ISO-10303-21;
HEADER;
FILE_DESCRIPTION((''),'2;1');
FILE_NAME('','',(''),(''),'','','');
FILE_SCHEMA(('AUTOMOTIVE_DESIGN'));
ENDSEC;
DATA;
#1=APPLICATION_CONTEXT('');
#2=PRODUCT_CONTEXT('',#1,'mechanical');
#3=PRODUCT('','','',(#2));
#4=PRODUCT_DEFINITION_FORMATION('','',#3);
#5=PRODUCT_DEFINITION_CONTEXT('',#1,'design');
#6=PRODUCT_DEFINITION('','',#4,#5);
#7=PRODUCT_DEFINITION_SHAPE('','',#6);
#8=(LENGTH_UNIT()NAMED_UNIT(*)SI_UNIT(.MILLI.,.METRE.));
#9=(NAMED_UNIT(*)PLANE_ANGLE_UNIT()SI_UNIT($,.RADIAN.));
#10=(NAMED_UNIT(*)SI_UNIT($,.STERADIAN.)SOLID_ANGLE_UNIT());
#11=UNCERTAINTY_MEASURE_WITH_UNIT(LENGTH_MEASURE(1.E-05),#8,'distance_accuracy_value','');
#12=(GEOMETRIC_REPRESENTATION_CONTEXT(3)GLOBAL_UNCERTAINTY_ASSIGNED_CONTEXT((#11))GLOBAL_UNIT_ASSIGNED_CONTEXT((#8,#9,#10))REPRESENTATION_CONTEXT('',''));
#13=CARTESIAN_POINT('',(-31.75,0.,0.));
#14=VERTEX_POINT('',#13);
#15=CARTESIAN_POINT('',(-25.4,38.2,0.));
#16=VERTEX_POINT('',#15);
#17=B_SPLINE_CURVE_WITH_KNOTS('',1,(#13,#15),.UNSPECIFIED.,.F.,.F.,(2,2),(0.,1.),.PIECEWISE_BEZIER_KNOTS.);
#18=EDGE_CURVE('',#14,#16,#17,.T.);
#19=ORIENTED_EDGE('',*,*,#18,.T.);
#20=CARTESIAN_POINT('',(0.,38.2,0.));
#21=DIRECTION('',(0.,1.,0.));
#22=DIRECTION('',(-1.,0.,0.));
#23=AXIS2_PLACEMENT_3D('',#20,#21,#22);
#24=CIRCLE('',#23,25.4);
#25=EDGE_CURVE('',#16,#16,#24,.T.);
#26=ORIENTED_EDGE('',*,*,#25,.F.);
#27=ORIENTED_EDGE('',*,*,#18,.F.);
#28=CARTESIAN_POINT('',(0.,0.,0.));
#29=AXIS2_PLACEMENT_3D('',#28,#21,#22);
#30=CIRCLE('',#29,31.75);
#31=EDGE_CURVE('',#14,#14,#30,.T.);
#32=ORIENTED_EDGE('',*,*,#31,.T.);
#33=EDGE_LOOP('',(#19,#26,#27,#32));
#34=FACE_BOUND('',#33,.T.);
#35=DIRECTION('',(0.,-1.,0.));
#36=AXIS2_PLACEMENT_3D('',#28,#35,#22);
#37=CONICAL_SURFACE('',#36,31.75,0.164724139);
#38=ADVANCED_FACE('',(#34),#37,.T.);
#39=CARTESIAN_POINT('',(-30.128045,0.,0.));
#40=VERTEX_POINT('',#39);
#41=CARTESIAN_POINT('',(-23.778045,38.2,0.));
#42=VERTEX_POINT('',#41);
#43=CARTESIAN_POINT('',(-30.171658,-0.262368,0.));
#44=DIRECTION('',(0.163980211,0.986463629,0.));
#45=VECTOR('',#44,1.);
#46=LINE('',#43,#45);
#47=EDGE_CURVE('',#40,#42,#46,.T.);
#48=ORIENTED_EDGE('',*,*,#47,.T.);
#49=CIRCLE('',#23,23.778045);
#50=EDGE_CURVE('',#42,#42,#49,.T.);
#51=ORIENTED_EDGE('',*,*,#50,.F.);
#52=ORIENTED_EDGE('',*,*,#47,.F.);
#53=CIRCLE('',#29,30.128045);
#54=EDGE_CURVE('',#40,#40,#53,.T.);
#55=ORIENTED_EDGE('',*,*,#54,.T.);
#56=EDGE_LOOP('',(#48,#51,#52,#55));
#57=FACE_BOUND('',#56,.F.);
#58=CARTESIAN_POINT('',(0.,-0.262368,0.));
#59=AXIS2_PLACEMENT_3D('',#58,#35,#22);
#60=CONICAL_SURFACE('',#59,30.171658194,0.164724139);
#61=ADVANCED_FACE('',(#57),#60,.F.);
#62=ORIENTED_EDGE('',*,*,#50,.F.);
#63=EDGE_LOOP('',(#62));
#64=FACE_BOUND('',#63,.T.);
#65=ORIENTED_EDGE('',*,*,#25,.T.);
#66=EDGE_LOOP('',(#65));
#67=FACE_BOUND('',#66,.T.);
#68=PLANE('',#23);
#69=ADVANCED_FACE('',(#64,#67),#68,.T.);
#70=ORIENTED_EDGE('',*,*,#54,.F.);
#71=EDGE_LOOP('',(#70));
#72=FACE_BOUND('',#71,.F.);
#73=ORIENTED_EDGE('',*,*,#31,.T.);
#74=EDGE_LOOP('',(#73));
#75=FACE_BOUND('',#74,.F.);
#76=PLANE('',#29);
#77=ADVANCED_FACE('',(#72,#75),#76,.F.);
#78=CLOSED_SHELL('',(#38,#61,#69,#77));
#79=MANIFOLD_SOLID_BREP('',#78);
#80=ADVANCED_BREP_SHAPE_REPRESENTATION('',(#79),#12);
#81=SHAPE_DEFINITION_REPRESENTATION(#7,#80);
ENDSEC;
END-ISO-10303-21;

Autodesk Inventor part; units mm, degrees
ref_plane "YZ Plane" through (0, 0, 0) normal (1, 0, 0) x (0, 1, 0)
ref_plane "XY Plane" through (0, 0, 0) normal (0, 0, 1) x (1, 0, 0)
sketch "Szkic6" plane through (0, 0, 0) normal (0, 1, 0) x (-1, 0, 0)
  circle A0 centre (0, 0) radius 31.75
  dimension "d33" = 63.5
ref_plane "Płaszczyzna konstrukcyjna1" through (0, 38.2, 0) normal (0, 1, 0) x (-1, 0, 0)
sketch "Szkic7" plane through (0, 38.2, 0) normal (0, 1, 0) x (-1, 0, 0)
  circle A0 centre (0, 0) radius 25.4
  dimension "d35" = 50.8
loft "Wyciągnięcie złożone1" add profiles "Szkic6", "Szkic7"
shell "Skorupa1" thickness 1.6 removed faces 2 at (7.2508, 38.2, -1.9085) at (14.3997, 0, 5.5289)
equation "\"d33\" = OD1"
equation "\"d35\" = OD2"
equation "\"d52\" = THK"
equation "\"SzerokośćGięciaPodcięcia\" = Grubość"
equation "\"RozmiarPodcięciaNarożnika\" = 4 * Grubość"
equation "\"PromieńPrzejścia\" = PromieńGięcia"
equation "\"Rozmiar_promienia_Jacobiego\" = PromieńGięcia"
equation "\"Wielk_odstępu\" = Grubość"
equation "\"d2\" = PromieńGięcia"
equation "\"d23\" = PromieńGięcia"
equation "\"OD1\" = 63.5"
equation "\"OD2\" = 50.8"
equation "\"L\" = 38.2"
equation "\"THK\" = 1.6"
equation "\"d34\" = L"
equation "\"Grubość\" = 1.5"
equation "\"PromieńGięcia\" = 3"
properties part number "Redukcja symetryczna Ø63,5x50,8x1,6 L=38,2" material "304"
